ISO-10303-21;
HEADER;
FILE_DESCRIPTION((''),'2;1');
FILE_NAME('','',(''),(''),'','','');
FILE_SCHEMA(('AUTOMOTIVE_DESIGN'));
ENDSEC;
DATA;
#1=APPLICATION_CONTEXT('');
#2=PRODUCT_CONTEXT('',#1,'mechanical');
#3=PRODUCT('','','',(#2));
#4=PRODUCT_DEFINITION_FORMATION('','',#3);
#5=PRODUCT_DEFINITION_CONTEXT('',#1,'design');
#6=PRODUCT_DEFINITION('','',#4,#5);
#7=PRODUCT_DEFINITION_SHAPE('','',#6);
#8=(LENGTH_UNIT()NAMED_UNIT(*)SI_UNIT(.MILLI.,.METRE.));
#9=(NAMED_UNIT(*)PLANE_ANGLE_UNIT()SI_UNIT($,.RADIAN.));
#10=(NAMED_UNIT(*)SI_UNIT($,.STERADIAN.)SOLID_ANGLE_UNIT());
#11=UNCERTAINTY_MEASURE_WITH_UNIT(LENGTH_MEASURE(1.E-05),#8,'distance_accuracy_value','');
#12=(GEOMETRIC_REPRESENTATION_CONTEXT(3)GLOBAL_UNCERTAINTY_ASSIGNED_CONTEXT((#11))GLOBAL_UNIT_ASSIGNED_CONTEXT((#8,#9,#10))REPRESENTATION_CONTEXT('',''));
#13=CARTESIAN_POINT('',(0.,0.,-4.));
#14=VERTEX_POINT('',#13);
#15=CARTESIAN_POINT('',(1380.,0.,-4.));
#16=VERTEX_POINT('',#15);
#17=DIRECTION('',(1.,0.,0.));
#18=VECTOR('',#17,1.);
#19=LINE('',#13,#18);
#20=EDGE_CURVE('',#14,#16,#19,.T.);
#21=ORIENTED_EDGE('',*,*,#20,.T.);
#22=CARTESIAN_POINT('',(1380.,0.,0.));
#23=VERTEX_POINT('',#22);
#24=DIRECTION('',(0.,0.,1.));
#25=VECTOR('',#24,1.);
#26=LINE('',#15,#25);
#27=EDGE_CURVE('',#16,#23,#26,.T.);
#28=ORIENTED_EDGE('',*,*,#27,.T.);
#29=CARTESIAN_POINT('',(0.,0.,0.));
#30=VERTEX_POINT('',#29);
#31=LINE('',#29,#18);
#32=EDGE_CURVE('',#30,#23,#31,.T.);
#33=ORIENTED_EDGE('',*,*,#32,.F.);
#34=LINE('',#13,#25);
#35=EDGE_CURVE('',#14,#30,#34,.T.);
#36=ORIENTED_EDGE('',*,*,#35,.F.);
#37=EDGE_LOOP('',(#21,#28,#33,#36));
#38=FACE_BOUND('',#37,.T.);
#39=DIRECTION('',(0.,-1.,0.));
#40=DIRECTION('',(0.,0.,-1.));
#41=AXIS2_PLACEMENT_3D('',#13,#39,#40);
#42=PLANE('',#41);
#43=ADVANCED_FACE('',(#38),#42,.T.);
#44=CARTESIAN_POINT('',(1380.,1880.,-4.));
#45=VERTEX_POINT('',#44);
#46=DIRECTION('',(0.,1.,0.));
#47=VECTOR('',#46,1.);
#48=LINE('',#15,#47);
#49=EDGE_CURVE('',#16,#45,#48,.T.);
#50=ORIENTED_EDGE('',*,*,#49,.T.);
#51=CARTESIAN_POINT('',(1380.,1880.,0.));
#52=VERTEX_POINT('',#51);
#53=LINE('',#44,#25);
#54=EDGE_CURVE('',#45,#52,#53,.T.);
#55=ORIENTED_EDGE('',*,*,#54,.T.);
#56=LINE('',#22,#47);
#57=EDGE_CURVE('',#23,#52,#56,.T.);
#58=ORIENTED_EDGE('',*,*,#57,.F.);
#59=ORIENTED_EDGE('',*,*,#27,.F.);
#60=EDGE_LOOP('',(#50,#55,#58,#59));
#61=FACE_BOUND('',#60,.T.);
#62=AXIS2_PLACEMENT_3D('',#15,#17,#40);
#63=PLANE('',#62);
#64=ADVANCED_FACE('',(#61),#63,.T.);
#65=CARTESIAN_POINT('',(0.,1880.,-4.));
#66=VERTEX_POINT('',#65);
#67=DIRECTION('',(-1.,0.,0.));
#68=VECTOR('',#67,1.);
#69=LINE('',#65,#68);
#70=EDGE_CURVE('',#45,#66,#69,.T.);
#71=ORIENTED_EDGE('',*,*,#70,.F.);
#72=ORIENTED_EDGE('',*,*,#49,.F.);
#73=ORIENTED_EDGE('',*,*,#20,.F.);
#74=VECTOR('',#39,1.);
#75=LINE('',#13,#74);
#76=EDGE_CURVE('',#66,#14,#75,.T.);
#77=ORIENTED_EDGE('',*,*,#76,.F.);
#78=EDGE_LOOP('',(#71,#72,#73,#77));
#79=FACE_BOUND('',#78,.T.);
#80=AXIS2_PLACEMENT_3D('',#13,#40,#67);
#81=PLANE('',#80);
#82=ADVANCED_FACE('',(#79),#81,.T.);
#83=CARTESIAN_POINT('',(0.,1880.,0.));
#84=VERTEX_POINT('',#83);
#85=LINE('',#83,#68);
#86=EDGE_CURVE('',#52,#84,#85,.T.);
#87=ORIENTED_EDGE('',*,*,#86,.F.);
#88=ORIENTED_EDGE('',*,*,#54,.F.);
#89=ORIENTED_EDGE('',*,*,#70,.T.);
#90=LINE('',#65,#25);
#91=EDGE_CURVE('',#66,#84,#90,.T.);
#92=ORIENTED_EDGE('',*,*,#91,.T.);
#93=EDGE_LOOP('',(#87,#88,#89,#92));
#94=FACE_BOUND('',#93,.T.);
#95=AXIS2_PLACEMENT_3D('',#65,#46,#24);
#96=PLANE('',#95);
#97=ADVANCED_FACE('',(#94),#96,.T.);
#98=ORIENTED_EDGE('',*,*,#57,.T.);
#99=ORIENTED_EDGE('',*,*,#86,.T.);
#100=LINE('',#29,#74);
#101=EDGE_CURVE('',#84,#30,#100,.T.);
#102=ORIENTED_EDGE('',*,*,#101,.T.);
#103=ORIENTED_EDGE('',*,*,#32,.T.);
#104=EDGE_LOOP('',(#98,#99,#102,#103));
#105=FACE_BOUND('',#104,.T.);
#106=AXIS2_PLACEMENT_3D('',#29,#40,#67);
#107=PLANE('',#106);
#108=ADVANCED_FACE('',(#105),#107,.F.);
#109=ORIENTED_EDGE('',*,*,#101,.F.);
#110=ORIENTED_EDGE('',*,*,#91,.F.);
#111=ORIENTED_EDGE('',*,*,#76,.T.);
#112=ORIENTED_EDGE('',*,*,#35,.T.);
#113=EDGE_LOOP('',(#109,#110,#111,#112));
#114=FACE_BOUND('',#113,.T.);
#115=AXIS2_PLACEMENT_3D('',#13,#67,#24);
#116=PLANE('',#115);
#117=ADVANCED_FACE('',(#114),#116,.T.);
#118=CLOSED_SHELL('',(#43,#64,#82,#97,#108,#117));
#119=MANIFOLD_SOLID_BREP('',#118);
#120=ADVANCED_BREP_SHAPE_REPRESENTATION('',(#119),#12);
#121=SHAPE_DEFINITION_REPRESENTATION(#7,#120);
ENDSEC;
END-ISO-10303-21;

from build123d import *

# Parameters (mm, degrees)
SZKIC1_W               = 1380
SZKIC1_H               = 1880
ODGI_CIE_BAZOWE1_DEPTH = 4


# Sheet-metal steps are written as plain solids
with BuildPart() as part:
    # Szkic1 → Odgięcie bazowe1 (new body)
    with BuildSketch(Plane.XY):
        with Locations((690, 940)):
            Rectangle(SZKIC1_W, SZKIC1_H)
    extrude(amount=-ODGI_CIE_BAZOWE1_DEPTH)


solid = part.part
